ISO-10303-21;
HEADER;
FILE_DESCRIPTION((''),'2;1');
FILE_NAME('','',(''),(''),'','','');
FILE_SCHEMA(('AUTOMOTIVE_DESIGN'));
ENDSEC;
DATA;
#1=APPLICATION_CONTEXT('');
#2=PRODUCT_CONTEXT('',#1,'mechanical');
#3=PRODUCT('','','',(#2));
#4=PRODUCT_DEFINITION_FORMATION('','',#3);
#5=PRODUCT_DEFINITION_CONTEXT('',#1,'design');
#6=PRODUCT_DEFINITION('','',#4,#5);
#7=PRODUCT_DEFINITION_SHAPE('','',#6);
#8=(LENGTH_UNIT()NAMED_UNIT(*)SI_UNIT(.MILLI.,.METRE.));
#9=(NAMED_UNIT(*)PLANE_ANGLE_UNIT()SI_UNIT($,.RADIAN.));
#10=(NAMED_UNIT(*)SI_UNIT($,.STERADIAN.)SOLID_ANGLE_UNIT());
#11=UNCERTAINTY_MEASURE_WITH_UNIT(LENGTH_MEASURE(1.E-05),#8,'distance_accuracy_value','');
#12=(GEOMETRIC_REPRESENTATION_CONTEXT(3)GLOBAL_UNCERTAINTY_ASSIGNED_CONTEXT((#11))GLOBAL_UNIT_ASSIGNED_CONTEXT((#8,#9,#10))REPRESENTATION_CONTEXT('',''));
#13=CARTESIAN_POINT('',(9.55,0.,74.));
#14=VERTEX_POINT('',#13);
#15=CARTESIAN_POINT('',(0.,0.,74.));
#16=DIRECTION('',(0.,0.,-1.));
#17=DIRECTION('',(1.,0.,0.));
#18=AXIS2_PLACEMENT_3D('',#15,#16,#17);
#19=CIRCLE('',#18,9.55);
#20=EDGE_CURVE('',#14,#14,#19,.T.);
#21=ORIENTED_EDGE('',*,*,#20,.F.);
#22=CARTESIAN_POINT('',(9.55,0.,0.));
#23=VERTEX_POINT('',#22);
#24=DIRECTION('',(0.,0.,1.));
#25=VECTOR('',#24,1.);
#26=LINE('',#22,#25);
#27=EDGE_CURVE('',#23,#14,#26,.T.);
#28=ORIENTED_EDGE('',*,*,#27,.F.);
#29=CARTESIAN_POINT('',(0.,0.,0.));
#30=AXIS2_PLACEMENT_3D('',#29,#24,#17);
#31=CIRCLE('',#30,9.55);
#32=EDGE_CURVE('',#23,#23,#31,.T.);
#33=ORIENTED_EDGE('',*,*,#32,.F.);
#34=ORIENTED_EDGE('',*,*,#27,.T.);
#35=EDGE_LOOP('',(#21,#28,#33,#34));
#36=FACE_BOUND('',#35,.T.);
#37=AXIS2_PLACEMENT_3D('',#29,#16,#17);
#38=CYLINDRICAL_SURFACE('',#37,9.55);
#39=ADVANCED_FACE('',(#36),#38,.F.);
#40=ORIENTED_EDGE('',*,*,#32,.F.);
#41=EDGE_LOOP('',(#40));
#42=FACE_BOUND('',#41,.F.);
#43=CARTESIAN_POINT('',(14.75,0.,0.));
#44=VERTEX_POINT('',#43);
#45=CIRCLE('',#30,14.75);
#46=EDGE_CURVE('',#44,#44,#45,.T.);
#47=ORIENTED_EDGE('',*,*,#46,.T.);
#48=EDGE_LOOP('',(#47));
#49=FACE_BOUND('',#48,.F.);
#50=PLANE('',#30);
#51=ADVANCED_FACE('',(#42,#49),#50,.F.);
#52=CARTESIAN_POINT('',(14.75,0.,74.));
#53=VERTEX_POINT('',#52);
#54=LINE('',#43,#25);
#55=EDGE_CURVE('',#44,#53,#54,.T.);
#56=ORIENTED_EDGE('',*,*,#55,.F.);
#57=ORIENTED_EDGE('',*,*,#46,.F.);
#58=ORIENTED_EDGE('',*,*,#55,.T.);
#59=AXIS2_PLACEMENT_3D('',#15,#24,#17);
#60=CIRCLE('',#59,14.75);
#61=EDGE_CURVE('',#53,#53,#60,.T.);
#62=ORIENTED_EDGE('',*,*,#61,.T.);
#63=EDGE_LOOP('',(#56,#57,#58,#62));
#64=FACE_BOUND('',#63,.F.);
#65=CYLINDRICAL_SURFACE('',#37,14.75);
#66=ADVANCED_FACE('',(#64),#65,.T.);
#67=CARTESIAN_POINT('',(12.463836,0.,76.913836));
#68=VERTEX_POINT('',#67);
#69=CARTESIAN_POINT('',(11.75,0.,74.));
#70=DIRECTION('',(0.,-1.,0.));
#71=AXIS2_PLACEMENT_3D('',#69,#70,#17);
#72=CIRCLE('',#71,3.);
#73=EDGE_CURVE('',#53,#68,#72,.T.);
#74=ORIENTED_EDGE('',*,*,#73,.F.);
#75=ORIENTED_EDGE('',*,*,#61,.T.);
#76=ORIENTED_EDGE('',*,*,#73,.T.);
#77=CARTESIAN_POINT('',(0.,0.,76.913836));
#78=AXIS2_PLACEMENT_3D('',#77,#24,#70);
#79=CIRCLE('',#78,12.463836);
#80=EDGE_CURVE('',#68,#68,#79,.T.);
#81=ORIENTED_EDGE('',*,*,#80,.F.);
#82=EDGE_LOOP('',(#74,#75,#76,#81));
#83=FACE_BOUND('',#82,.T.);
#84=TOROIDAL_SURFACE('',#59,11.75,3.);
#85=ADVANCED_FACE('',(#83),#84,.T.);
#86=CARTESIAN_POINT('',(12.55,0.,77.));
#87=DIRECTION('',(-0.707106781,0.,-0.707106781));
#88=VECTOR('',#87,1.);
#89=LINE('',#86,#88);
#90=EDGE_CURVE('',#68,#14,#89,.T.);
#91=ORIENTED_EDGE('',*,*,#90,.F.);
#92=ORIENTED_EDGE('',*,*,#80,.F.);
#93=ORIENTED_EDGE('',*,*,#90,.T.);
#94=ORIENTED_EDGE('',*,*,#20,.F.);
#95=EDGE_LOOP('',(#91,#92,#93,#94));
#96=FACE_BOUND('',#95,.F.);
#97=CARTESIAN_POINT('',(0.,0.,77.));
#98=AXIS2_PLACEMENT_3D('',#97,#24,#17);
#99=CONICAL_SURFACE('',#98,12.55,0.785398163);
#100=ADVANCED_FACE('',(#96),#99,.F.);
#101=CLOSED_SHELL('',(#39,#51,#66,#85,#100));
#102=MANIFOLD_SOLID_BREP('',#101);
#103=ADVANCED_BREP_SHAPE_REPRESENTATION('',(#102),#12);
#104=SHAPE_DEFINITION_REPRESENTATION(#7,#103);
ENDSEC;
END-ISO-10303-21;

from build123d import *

# Parameters (mm, degrees)
F0_R     = 14.75
F1_DEPTH = 77
F2_R     = 9.55
F3_DEPTH = 77.001
F4_R     = 3


# Not quite as in the source:
# - a fillet or chamfer that OpenCascade refuses, or shapes differently, is made with other operations: its cross-section is extruded or revolved along the edge and cut away or added


with BuildPart() as f1:
    # F0 (on Top) → F1 (new body)
    with BuildSketch(Plane.XY):
        Circle(F0_R)
    extrude(amount=F1_DEPTH)

    # F2 (on Top) → F3 (cut, through all)
    with BuildSketch(Plane.XY):
        Circle(F2_R)
    extrude(amount=F3_DEPTH, mode=Mode.SUBTRACT)

    # F4
    f4_edges = [f1.edges().sort_by_distance(p)[0] for p in [
        (-14.75, 0, 77),
    ]]
    fillet(f4_edges, radius=F4_R)

    # F5: chamfer of 3 on 1 edges, made by hand

    # F5_s1 → F5_t2 (revolve, cut)
    with BuildSketch(Plane.XZ):
        Polygon((12.55, 77), (9.55, 74), (9.55, 77), align=None)
    revolve(axis=Axis((0, 0, 77), (0, 0, -1)), mode=Mode.SUBTRACT)


solid = f1.part
